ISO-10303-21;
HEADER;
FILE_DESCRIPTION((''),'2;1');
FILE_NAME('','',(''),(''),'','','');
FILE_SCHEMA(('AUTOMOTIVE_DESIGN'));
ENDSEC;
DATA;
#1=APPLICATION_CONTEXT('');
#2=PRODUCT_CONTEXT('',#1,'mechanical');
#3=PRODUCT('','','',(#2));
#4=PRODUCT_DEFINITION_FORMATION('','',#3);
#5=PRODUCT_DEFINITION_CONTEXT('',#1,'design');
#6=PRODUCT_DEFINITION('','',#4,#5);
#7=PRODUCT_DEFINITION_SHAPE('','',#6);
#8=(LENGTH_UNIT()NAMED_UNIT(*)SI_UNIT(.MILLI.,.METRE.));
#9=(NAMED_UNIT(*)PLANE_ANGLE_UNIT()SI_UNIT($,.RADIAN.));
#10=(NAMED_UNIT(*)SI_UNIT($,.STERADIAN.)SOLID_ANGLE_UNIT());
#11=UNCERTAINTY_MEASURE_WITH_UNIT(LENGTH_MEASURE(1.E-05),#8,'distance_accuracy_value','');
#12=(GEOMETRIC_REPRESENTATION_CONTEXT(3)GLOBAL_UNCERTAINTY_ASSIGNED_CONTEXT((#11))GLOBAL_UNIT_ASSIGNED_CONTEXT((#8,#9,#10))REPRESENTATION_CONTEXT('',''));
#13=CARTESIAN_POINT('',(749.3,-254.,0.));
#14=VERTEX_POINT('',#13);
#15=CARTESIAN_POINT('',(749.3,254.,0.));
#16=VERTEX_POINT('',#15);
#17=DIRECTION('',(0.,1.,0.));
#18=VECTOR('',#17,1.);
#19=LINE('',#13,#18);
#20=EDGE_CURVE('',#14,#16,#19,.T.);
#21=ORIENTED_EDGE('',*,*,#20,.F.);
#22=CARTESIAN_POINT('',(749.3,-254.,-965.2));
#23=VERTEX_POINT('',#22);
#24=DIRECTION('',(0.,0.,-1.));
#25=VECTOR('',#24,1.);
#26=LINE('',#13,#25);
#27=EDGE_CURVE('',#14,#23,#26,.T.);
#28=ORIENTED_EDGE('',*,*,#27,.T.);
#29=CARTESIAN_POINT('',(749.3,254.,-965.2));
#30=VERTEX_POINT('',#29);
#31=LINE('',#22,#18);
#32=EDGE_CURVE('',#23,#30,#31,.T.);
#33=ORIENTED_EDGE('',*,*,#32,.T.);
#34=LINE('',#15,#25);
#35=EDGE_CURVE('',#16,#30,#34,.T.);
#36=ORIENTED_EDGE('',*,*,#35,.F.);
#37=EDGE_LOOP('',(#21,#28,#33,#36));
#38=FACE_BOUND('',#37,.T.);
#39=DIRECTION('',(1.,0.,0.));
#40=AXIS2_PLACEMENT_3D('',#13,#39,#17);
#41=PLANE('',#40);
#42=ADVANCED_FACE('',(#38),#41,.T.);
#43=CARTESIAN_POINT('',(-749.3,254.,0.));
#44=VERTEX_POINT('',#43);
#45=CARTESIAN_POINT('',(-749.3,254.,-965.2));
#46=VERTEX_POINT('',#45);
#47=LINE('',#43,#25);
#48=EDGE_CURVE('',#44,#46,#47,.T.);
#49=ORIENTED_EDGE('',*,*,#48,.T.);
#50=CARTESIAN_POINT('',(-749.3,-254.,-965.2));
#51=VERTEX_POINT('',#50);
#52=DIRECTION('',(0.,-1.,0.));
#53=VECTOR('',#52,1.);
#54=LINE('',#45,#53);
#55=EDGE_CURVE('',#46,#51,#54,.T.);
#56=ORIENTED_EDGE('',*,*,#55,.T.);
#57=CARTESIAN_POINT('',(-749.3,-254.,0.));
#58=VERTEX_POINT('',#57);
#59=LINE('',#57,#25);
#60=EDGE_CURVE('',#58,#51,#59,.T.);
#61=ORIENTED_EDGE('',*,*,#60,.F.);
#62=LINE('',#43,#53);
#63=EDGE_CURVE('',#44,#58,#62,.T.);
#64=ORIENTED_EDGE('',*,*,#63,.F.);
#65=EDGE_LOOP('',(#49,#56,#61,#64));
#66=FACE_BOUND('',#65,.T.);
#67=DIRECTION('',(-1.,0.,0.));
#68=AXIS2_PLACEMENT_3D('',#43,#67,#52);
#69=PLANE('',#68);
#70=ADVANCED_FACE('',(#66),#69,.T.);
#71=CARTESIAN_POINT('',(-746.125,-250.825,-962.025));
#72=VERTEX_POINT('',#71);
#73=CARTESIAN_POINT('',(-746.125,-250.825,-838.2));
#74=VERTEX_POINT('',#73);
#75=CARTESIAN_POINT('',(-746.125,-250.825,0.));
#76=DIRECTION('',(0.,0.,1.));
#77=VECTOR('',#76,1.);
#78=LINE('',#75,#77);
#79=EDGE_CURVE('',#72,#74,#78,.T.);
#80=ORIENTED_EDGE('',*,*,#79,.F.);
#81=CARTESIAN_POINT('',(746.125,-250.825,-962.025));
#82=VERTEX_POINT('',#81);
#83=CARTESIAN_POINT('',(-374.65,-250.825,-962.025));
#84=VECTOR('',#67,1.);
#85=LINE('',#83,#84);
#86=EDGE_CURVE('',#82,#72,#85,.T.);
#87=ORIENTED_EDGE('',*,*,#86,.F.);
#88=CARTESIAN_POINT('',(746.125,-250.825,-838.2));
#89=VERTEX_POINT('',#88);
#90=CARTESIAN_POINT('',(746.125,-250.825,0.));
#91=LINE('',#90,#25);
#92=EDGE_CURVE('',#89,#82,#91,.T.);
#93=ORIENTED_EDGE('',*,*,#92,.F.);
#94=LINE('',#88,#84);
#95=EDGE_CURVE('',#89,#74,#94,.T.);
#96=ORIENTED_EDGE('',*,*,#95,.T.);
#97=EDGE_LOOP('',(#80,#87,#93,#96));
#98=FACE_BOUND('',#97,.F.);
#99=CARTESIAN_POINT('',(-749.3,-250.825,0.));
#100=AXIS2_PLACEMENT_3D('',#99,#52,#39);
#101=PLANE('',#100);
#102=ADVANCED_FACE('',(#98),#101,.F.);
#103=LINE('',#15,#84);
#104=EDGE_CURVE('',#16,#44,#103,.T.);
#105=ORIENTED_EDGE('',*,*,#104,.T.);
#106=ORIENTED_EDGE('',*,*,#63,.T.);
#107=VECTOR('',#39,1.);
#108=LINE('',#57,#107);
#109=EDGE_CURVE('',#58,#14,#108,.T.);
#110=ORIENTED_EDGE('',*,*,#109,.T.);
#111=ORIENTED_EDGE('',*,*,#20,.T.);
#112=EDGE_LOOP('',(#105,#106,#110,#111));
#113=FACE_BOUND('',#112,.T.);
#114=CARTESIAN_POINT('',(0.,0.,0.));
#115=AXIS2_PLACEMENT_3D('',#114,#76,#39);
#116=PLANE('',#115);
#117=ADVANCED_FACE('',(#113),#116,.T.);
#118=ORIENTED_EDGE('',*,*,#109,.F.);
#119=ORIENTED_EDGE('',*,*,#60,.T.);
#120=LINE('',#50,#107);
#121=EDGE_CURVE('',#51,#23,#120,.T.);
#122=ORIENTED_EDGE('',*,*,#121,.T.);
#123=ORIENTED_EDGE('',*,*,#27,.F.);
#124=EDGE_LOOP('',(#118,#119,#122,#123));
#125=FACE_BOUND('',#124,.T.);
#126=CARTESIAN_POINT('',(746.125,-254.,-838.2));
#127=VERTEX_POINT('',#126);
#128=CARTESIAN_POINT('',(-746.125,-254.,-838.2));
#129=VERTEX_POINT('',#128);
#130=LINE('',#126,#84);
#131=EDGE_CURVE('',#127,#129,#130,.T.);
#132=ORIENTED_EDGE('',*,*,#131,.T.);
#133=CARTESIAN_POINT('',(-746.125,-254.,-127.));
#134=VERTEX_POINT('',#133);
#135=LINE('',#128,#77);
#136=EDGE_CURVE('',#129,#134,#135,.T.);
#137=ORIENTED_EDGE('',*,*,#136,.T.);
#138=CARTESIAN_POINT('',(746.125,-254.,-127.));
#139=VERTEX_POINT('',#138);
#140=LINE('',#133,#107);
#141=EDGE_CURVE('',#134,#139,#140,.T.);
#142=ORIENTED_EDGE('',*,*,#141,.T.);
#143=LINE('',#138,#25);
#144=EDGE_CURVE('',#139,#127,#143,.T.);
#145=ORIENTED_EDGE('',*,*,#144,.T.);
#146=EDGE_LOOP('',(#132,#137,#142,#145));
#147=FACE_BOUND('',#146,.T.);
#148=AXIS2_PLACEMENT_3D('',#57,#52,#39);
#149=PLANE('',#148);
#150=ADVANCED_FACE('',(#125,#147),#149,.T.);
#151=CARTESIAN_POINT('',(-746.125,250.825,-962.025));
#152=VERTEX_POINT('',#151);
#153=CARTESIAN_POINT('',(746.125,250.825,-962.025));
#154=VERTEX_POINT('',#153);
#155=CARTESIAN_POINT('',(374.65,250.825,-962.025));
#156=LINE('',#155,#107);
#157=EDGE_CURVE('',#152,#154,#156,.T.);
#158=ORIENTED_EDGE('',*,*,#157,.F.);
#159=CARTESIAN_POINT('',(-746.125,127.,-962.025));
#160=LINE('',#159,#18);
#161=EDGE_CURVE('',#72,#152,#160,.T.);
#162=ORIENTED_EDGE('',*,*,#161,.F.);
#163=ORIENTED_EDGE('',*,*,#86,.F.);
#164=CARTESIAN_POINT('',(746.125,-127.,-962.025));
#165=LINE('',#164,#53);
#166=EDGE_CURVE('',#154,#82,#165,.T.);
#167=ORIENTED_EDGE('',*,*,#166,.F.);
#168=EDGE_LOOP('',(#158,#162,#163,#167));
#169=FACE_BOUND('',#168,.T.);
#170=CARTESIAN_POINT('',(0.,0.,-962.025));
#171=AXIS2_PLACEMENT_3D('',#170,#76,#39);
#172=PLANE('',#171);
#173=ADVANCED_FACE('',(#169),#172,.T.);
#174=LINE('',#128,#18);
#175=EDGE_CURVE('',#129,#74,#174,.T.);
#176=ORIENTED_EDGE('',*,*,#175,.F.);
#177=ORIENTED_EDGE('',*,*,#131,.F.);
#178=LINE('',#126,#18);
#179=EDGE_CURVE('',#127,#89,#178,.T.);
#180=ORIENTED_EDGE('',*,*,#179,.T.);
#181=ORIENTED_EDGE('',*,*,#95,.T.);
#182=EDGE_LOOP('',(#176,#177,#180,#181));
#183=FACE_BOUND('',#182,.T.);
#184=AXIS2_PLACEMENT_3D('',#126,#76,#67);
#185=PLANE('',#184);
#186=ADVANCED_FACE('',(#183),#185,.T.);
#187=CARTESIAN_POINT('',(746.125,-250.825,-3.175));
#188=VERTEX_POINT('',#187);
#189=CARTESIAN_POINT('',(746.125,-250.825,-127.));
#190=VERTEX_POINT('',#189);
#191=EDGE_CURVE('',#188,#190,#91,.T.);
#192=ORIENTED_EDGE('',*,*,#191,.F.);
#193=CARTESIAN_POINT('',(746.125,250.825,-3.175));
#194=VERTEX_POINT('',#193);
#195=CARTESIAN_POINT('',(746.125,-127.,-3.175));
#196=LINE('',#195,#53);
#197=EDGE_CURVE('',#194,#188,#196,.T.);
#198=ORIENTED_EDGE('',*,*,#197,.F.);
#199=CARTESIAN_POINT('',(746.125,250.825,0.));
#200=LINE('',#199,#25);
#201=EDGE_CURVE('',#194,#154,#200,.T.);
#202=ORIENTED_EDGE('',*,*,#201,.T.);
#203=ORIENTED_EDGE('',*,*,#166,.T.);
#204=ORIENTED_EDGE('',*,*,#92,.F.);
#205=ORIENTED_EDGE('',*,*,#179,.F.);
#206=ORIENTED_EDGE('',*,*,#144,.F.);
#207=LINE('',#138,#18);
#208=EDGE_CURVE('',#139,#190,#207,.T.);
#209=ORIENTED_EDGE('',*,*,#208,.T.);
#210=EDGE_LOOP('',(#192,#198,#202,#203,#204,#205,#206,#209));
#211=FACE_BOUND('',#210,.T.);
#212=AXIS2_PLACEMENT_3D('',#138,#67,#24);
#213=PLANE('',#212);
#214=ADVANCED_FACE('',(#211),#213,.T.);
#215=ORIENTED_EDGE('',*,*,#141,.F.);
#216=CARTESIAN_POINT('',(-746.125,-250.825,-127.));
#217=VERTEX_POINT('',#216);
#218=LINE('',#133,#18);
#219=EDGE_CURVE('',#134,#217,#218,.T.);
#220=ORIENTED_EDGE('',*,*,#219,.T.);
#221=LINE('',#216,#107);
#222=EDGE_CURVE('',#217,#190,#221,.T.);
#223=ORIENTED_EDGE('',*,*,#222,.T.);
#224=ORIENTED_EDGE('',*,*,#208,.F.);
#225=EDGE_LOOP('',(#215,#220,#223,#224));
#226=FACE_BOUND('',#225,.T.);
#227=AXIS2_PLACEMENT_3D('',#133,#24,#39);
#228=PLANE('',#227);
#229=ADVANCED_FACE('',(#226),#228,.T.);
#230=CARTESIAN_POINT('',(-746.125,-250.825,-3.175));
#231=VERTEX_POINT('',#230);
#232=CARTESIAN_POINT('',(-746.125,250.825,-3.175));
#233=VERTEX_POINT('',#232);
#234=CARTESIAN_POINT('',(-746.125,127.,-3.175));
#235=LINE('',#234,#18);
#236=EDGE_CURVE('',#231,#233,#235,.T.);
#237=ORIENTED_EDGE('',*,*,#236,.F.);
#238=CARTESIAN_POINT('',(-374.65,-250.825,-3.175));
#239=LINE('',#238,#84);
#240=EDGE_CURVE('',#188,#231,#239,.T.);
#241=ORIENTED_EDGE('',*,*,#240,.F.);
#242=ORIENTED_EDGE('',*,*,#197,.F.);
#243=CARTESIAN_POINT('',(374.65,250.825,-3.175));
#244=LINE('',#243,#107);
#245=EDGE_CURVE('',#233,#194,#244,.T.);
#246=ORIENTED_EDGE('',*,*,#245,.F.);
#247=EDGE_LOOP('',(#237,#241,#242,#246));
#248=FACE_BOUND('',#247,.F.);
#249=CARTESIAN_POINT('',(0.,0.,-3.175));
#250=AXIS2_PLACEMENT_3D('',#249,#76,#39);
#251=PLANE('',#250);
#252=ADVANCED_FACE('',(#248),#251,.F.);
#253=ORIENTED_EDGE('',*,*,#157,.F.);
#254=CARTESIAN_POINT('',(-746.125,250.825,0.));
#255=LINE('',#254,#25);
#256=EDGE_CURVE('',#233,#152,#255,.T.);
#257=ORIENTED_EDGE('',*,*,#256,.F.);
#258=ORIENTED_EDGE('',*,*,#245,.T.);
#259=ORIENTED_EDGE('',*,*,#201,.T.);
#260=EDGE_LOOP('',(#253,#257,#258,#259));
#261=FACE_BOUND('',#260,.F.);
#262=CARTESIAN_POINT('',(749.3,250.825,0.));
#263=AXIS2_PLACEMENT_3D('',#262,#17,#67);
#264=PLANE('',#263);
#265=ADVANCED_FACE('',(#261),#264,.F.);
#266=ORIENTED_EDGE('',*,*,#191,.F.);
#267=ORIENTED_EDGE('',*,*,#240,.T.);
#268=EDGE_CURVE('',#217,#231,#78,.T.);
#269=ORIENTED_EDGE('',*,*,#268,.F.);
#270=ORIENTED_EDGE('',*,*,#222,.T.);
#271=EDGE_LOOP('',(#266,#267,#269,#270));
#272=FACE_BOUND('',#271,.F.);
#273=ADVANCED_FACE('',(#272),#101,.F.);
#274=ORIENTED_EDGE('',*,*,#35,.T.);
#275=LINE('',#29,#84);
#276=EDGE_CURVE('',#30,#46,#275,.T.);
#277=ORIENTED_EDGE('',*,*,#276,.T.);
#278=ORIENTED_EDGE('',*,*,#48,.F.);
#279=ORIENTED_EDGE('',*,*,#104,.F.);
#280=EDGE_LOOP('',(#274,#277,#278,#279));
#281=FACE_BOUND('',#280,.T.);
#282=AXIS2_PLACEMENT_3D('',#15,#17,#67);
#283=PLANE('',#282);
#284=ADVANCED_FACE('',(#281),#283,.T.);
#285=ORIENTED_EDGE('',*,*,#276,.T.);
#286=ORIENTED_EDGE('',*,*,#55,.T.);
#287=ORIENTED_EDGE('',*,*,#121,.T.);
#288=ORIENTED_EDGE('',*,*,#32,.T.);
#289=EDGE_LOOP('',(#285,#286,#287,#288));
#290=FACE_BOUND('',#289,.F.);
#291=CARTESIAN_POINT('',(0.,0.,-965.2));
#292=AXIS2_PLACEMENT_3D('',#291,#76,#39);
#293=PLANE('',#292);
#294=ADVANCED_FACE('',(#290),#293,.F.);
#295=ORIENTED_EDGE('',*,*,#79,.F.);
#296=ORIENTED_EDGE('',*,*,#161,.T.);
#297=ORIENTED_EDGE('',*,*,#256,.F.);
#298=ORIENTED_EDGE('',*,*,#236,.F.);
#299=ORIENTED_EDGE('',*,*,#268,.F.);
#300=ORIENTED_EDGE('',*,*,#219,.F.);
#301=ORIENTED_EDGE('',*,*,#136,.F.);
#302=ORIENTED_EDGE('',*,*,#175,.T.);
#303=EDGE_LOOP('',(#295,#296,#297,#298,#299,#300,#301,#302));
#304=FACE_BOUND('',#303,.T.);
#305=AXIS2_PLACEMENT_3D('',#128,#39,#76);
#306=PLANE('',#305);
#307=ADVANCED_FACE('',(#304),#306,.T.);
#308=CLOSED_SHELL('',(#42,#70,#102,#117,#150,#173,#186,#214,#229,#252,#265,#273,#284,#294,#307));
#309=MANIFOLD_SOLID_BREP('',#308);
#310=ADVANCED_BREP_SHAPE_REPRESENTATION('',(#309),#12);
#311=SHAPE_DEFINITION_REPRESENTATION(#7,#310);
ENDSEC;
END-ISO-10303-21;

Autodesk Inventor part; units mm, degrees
ref_plane "YZ Plane" through (0, 0, 0) normal (1, 0, 0) x (0, 1, 0)
ref_plane "XZ Plane" through (0, 0, 0) normal (0, 1, 0) x (-1, 0, 0)
ref_plane "XY Plane" through (0, 0, 0) normal (0, 0, 1) x (1, 0, 0)
sketch "Sketch1" plane through (0, 0, 0) normal (0, 0, 1) x (1, 0, 0)
  line L0 (-749.3, -254) -> (749.3, -254)
  line L1 (749.3, -254) -> (749.3, 254)
  line L2 (749.3, 254) -> (-749.3, 254)
  line L3 (-749.3, 254) -> (-749.3, -254)
  line L4 (-749.3, -254) -> (749.3, 254) construction
  line L5 (749.3, -254) -> (-749.3, 254) construction
  point P0 (0, 0)
  dimension "d0" = 1498.6
  dimension "d1" = 508
extrude "Extrusion1" add sketch "Sketch1" against normal blind 965.2
shell "Shell1" thickness 3.175 removed faces 0
sketch "Sketch2" plane through (-749.3, -254, 0) normal (0, -1, 0) x (1, 0, 0)
  line L0 (0, 0) -> (1498.6, 0) projected
  line L1 (1498.6, -965.2) -> (0, -965.2) projected
  line L2 (3.175, -127) -> (1495.425, -127)
  line L3 (1495.425, -127) -> (1495.425, -838.2)
  line L4 (1495.425, -838.2) -> (3.175, -838.2)
  line L5 (3.175, -838.2) -> (3.175, -127)
  line L6 (3.175, -3.175) -> (3.175, -962.025) projected
  line L7 (1495.425, -3.175) -> (1495.425, -962.025) projected
  point P0 (749.3, 0)
  dimension "d5" = 127
  dimension "d6" = 127
extrude "Extrusion2" cut sketch "Sketch2" against normal blind 3.175
equation "\"d6\" = d5"
properties part number "box_middlegoal" material "Polycarbonate, Clear"
